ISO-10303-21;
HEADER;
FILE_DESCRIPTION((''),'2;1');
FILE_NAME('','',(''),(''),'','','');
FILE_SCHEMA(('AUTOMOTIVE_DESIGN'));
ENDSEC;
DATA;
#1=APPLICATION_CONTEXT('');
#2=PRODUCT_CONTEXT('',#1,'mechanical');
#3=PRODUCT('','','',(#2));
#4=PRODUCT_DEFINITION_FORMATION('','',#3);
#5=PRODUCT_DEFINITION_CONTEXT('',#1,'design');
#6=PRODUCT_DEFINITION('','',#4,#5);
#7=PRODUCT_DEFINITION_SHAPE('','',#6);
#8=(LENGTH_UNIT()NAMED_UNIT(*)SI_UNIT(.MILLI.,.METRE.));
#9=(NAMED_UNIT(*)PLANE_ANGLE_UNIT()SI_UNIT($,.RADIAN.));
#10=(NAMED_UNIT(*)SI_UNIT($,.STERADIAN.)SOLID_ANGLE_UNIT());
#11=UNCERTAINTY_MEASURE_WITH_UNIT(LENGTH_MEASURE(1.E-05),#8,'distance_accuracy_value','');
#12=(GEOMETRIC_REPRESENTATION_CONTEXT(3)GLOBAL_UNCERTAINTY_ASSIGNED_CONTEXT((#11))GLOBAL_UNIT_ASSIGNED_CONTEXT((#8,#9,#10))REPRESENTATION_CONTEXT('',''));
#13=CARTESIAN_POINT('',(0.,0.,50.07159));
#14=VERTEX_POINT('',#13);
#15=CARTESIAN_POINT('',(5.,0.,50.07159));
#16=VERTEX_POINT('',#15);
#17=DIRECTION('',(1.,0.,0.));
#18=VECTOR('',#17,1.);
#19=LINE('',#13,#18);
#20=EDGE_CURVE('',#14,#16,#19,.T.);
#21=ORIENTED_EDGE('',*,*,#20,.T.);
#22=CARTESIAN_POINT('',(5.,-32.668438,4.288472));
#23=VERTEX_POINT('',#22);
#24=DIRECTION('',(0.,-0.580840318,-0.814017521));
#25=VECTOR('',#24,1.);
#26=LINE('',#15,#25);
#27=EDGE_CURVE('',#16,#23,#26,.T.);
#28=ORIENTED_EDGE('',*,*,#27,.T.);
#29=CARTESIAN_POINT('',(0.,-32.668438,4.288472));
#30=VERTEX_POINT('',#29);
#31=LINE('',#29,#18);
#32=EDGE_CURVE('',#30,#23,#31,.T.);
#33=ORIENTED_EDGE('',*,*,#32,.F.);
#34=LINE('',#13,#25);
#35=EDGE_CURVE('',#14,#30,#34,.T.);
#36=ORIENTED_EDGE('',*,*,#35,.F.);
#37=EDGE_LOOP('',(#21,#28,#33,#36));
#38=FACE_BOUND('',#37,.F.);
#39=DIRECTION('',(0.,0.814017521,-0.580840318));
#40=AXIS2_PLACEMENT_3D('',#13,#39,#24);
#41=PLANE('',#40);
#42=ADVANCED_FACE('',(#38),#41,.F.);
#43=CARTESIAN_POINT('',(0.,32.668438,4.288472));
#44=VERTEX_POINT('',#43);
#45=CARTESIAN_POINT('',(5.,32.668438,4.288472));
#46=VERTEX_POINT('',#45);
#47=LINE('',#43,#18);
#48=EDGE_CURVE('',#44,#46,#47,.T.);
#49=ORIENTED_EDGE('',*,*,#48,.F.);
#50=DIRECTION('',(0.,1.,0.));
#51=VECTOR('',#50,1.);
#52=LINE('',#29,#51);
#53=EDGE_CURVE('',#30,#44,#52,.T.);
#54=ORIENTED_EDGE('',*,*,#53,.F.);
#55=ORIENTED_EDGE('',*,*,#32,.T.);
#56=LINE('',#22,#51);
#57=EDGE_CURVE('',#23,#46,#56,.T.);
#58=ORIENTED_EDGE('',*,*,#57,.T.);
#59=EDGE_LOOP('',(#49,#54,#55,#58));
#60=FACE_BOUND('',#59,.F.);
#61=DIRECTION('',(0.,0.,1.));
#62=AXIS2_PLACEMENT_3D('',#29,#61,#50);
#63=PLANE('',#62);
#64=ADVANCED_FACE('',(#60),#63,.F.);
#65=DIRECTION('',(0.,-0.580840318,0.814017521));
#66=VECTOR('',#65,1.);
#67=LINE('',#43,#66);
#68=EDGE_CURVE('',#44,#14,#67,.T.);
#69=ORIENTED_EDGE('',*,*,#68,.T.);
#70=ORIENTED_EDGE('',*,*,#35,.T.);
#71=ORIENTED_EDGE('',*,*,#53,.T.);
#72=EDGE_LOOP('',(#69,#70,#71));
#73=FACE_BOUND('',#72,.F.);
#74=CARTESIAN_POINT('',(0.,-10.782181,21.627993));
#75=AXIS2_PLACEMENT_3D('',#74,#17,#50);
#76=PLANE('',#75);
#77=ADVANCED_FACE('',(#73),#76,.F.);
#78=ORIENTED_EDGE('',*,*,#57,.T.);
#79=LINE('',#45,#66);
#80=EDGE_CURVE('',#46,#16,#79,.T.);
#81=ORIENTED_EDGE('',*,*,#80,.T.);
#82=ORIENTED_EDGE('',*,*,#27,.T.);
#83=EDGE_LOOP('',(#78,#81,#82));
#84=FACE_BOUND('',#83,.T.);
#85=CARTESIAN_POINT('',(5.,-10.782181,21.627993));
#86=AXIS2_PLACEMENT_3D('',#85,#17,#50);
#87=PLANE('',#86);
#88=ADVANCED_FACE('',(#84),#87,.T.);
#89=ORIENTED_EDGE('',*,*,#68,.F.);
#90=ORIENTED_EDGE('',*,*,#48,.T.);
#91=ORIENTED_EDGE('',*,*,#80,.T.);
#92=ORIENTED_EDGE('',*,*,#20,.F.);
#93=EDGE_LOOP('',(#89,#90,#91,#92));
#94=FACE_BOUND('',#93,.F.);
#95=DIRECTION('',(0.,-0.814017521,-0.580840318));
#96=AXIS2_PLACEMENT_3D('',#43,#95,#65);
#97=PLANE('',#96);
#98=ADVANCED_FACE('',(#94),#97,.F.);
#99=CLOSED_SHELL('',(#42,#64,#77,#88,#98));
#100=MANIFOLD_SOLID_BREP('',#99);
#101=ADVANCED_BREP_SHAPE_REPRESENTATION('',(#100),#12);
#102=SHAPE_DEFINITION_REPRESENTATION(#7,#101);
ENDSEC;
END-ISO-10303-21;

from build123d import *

# Parameters (mm, degrees)
F3_DEPTH = 5


# Not quite as in the source:
# - the program builds the solid bodies; features that only make, move or delete a surface that nothing else refers to are left out


with BuildPart() as f3:
    # F2 (on Right) → F3 (new body)
    with BuildSketch(Plane.YZ):
        Polygon((-32.6684378088, 4.2884717695), (0, 4.2884717695), (0, 50.0715896487), align=None)
        Polygon((0, 50.0715896487), (0, 4.2884717695), (32.6684378088, 4.2884717695), align=None)
    extrude(amount=F3_DEPTH)


solid = f3.part
